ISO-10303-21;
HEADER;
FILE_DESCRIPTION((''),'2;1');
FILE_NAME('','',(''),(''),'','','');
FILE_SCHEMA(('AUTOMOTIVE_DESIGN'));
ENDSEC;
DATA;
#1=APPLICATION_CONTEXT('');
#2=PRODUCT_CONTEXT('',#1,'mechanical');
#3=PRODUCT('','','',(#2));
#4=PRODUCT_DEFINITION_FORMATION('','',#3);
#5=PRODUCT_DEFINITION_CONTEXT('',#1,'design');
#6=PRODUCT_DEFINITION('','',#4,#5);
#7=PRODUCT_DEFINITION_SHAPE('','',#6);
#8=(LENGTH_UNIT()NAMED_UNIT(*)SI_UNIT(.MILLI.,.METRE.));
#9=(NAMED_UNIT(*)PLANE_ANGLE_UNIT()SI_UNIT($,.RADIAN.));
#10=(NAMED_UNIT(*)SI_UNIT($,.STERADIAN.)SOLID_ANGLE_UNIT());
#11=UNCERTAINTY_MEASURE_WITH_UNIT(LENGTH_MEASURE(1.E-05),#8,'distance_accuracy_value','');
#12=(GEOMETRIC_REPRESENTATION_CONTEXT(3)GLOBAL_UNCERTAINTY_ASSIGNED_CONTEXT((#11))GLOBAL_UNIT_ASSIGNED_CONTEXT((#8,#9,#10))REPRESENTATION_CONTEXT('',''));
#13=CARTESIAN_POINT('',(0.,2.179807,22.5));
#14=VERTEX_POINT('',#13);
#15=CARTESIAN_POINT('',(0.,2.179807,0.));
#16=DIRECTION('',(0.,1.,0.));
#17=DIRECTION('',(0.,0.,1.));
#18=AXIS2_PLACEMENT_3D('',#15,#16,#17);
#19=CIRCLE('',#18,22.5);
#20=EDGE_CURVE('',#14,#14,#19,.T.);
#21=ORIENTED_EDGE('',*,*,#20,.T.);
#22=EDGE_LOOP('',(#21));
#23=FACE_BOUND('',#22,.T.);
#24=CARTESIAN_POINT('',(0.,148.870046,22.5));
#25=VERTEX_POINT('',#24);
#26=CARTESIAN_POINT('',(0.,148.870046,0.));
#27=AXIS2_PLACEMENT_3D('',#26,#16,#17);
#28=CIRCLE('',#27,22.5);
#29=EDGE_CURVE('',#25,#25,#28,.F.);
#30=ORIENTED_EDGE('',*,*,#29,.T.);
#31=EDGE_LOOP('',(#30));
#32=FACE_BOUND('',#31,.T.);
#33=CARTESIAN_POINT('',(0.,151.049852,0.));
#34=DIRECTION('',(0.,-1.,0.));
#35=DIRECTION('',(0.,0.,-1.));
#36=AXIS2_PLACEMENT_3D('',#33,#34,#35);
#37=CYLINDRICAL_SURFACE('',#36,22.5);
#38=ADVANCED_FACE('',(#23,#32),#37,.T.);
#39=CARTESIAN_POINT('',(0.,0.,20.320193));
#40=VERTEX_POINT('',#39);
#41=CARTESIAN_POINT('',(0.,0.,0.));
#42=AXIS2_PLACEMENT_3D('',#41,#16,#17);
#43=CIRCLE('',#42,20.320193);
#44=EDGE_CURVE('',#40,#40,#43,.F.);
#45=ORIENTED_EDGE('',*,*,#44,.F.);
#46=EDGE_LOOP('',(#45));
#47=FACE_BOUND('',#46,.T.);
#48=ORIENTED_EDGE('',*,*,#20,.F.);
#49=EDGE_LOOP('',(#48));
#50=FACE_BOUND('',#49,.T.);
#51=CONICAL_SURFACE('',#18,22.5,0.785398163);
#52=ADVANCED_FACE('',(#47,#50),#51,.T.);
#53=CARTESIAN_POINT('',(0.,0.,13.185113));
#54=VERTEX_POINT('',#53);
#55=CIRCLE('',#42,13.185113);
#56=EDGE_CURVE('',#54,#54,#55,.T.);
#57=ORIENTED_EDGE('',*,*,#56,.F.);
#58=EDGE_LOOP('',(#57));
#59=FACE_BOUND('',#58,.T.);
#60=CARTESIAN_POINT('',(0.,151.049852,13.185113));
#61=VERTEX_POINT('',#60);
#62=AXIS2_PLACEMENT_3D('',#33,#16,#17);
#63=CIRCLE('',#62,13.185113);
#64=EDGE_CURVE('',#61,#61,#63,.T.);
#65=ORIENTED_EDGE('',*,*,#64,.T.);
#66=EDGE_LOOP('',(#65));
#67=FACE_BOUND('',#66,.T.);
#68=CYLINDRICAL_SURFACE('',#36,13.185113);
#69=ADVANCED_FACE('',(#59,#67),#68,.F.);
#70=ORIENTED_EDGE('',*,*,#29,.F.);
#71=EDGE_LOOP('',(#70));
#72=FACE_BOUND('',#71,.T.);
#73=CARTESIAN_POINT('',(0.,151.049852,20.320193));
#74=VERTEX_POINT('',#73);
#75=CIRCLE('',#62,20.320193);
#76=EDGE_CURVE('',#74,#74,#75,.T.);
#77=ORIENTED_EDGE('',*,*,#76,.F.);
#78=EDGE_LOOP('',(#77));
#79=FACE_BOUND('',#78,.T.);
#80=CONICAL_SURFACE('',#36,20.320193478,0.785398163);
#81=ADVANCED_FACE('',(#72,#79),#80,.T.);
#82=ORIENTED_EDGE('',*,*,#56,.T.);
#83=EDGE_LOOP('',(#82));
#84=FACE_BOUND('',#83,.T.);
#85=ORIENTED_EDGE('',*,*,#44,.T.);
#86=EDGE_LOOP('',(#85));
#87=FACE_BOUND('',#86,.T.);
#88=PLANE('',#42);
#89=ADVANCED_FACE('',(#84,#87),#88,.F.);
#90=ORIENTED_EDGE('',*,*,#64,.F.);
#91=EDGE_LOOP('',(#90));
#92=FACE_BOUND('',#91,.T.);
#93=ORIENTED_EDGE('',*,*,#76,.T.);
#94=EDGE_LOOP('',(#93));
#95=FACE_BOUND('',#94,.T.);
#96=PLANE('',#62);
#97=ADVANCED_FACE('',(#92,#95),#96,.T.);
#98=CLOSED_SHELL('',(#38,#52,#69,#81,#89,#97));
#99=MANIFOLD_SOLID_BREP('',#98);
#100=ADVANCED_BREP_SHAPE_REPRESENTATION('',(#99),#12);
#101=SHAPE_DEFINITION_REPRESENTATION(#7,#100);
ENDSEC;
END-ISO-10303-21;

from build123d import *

# Parameters (mm, degrees)
SKETCH1_R           = 22.5
BOSS_EXTRUDE1_DEPTH = 151.049852421
SKETCH2_R           = 13.185113298
CUT_EXTRUDE1_DEPTH  = 155.365015196
CHAMFER1_SIZE       = 2.179806522


with BuildPart() as part:
    # Sketch1 → Boss-Extrude1 (new body)
    with BuildSketch(Plane(origin=(0, 0, 0), x_dir=(1, 0, 0), z_dir=(0, 1, 0))):
        Circle(SKETCH1_R)
    extrude(amount=BOSS_EXTRUDE1_DEPTH)

    # Sketch2 → Cut-Extrude1 (cut, through all)
    with BuildSketch(Plane(origin=(0, 0, 0), x_dir=(1, 0, 0), z_dir=(0, 1, 0))):
        Circle(SKETCH2_R)
    extrude(amount=CUT_EXTRUDE1_DEPTH, mode=Mode.SUBTRACT)

    # Chamfer1
    chamfer1_edges = [part.edges().sort_by_distance(p)[0] for p in [
        (-22.5, 151.049852421, 0),
        (-22.5, 0, 0),
    ]]
    chamfer(chamfer1_edges, length=CHAMFER1_SIZE)


solid = part.part
